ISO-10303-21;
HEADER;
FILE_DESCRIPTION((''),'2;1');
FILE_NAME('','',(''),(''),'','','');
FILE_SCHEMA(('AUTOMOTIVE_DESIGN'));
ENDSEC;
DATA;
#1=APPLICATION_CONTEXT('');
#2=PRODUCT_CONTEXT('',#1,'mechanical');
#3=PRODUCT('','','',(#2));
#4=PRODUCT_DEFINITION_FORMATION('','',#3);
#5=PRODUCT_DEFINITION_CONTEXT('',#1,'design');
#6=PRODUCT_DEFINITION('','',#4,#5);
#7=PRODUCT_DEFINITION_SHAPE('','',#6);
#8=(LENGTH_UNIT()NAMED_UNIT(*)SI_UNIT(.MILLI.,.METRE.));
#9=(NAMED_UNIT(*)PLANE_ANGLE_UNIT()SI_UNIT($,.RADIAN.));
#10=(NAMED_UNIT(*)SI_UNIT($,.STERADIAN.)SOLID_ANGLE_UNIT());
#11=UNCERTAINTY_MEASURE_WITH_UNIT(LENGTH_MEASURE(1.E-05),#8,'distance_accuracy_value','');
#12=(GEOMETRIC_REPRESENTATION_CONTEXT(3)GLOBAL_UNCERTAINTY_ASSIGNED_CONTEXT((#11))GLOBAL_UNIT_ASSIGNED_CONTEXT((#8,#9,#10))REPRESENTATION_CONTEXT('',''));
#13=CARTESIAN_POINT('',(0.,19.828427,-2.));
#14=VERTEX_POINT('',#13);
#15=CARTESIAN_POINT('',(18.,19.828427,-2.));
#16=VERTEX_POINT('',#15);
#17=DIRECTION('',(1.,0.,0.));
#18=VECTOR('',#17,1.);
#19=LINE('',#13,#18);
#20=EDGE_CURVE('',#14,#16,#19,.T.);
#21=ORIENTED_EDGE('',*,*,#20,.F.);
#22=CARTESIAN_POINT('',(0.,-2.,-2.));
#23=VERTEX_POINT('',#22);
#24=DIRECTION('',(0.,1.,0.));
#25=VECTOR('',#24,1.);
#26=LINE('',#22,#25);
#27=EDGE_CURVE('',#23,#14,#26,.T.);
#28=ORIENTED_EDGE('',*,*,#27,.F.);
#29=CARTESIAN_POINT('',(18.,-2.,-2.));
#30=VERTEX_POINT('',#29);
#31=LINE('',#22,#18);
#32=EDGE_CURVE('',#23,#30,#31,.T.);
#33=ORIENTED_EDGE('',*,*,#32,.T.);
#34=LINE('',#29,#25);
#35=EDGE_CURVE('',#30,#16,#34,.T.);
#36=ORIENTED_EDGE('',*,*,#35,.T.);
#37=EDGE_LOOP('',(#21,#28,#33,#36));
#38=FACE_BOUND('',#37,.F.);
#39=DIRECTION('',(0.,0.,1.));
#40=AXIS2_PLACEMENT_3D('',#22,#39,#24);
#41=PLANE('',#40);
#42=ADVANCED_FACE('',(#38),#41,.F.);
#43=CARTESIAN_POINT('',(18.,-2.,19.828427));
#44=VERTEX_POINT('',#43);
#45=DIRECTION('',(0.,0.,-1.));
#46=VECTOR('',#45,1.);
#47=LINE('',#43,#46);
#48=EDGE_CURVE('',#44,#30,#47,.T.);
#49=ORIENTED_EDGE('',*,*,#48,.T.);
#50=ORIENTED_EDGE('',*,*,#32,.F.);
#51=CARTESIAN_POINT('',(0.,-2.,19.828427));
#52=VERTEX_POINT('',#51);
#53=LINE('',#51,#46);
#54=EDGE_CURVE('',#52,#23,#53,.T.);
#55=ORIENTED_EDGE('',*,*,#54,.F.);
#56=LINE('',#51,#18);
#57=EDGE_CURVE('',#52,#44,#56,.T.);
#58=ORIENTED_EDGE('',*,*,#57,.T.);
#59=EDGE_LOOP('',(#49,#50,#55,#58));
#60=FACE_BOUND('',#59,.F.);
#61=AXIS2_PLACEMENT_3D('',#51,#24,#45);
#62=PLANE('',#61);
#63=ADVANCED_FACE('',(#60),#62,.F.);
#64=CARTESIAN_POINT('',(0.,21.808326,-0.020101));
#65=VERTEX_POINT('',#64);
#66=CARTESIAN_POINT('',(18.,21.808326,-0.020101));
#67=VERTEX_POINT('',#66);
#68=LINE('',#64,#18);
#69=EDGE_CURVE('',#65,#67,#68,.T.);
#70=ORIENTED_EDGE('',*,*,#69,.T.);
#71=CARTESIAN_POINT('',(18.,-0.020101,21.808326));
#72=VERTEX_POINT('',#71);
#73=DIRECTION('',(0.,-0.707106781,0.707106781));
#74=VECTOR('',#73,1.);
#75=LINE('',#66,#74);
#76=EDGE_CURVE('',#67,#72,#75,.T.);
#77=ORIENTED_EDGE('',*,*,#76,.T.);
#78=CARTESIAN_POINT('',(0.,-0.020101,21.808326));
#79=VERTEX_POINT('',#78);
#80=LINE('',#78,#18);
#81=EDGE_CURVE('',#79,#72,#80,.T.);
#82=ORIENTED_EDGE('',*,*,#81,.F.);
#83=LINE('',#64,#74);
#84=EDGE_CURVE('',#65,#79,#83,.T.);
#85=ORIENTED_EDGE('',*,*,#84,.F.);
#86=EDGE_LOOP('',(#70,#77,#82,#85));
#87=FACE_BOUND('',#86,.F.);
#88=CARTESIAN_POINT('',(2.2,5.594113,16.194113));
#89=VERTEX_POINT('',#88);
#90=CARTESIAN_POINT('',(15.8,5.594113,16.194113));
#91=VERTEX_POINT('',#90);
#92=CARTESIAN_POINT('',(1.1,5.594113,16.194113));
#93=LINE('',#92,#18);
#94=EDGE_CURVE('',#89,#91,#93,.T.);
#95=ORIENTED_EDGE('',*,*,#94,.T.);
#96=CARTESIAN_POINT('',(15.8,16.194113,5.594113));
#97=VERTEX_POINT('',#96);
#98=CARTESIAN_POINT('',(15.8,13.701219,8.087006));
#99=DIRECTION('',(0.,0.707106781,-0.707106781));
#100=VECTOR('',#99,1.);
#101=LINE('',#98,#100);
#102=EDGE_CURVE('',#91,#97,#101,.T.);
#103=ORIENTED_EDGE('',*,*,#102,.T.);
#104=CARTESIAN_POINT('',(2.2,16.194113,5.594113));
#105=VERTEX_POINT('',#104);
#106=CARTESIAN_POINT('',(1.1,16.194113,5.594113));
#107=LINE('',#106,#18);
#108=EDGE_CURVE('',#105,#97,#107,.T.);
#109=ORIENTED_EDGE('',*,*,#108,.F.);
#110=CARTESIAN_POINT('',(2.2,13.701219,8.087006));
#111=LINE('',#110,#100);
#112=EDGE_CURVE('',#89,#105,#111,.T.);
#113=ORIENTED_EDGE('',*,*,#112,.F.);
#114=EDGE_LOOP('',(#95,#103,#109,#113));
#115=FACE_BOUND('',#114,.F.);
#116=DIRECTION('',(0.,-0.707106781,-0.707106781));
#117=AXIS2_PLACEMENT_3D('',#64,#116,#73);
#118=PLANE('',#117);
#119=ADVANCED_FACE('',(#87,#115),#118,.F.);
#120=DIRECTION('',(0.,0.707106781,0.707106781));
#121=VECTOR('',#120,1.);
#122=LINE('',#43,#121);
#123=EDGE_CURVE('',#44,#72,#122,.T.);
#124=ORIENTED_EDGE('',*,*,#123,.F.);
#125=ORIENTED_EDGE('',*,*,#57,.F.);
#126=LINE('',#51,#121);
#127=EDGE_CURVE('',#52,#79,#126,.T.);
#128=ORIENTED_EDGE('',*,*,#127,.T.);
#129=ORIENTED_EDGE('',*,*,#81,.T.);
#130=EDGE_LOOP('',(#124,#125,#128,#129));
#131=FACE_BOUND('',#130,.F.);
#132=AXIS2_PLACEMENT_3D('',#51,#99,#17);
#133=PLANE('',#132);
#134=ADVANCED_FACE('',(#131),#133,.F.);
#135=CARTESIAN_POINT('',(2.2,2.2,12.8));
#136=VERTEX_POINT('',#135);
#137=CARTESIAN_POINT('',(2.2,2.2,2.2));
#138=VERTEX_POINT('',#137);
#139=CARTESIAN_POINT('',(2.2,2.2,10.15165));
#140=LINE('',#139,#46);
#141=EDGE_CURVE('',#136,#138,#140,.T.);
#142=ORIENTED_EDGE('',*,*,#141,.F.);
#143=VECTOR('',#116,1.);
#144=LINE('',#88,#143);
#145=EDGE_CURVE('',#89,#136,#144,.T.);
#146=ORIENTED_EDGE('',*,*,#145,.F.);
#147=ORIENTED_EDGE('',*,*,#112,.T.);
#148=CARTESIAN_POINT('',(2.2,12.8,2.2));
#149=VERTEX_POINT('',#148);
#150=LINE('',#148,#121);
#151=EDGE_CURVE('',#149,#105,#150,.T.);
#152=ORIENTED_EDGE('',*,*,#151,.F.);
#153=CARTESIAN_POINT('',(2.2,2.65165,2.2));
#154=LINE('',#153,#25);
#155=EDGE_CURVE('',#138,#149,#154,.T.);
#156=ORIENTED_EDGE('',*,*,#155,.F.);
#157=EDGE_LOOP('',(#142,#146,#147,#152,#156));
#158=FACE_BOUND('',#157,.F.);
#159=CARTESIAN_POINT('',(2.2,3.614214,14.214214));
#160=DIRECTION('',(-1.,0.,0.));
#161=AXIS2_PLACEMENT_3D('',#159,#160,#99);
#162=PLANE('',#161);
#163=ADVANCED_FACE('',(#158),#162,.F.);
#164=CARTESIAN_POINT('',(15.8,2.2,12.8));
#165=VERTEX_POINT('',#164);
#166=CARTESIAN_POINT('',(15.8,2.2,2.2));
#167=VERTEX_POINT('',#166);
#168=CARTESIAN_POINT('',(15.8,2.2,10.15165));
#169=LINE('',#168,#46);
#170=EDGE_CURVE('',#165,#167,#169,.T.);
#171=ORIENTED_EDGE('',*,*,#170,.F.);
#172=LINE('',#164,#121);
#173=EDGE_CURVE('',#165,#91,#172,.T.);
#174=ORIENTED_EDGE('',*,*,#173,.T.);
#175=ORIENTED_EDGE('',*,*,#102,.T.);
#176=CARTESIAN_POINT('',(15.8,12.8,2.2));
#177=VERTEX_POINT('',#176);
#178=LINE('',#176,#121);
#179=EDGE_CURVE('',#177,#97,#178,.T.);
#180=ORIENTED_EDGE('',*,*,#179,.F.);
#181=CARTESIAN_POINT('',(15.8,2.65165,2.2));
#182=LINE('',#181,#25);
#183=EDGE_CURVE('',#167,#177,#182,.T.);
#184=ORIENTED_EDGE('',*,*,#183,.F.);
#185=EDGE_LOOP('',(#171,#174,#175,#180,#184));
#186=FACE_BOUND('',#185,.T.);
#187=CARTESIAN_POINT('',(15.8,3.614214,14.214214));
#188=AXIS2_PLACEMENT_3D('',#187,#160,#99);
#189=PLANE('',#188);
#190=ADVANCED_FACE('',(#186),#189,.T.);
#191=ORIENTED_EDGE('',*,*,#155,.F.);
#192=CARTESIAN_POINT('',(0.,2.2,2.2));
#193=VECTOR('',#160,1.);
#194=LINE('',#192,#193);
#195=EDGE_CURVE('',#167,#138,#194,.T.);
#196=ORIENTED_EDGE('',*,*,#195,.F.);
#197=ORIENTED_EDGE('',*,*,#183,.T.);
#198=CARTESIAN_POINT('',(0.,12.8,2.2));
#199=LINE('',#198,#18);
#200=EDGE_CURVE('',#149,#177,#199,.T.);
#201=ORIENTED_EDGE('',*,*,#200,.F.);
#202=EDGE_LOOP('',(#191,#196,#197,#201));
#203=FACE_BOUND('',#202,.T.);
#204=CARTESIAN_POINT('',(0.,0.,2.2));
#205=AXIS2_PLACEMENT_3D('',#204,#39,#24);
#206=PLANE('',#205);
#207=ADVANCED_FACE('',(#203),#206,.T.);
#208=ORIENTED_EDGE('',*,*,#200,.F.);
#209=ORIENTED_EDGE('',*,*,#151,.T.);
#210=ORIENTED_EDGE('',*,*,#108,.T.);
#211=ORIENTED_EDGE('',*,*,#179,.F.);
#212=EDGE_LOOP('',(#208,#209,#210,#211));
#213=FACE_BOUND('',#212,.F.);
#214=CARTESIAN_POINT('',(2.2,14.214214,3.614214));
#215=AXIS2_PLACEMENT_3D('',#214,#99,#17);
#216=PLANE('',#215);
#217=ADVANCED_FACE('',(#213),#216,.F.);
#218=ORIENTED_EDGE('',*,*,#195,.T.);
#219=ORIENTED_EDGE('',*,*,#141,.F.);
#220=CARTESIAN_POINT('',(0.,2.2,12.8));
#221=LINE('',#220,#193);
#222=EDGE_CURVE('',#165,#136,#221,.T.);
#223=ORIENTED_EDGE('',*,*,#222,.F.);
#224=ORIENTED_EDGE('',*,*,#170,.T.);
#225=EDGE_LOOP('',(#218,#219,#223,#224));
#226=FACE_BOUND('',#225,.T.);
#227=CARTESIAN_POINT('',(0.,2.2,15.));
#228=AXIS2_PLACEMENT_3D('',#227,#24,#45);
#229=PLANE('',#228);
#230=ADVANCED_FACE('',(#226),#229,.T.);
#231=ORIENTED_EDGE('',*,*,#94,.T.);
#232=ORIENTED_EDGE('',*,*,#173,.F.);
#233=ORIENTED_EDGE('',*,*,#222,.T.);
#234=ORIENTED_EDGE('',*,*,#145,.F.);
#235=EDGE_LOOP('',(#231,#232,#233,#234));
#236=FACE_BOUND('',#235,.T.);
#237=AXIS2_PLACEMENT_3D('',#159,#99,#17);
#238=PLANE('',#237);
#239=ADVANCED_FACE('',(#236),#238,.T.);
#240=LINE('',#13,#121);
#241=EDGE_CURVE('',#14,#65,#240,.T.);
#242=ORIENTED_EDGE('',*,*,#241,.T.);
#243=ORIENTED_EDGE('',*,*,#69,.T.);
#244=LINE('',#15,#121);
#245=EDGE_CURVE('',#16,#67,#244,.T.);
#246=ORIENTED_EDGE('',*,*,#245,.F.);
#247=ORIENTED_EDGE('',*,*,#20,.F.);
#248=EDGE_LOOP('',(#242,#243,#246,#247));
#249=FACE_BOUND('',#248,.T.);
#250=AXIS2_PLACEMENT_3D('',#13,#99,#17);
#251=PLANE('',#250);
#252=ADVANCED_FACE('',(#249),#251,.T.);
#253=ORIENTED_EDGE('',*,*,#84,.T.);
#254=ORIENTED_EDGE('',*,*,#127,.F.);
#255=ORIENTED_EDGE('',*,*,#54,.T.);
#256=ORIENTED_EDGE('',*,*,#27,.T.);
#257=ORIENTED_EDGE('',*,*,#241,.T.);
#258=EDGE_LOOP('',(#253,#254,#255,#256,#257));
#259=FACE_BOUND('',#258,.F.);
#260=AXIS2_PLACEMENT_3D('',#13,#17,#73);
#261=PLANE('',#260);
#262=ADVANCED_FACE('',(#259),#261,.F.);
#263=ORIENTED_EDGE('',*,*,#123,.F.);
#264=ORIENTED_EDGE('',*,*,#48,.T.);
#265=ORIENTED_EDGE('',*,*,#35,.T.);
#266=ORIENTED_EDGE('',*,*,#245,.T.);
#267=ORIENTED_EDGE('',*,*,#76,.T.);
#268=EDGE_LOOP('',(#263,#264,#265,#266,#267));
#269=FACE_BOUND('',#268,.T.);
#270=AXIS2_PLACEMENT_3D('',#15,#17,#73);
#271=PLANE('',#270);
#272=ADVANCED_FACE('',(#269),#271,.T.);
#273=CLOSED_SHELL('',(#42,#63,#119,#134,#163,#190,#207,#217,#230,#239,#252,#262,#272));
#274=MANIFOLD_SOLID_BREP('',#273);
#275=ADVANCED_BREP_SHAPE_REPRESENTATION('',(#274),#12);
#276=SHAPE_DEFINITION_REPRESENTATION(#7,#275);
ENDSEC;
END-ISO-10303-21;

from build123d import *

# Parameters (mm, degrees)
F1_DEPTH = 18
F2_T     = -2.2
F4_DEPTH = 18
F3_W     = 13.6
F3_H     = 14.9906637612
F5_DEPTH = 8.9
F6_DEPTH = 2.8


# Not quite as in the source:
# - a feature of the source that left no trace in its solid (it failed there, or was rolled back) is left out


with BuildPart() as f1:
    # F0 (on Right) → F1 (new body)
    with BuildSketch(Plane.YZ):
        Polygon((0, 15), (0, 0), (15, 0), align=None)
    extrude(amount=F1_DEPTH)

    # F2
    f2_openings = [f1.faces().sort_by_distance(p)[0] for p in [
        (9, 7.5, 7.5),
    ]]
    offset(amount=F2_T, openings=f2_openings)

    # F0 (on Right) → F4 (join)
    with BuildSketch(Plane.YZ):
        Polygon((15, 0), (0, 0), (0, 15), (2.8284271247, 15), (-2, 19.8284271247), (-2, -2), (19.8284271247, -2), (15, 2.8284271247), align=None)
        Polygon((0, 15), (15, 0), (15, 2.8284271247), (2.8284271247, 15), align=None)
    extrude(amount=F4_DEPTH)

    # F3 (on face) → F5 (cut)
    with BuildSketch(Plane(origin=(0, 7.5, 7.5), x_dir=(1, 0, 0), z_dir=(0, 0.7071067812, 0.7071067812))):
        with Locations((9, 0)):
            Rectangle(F3_W, F3_H)
    extrude(amount=F5_DEPTH, mode=Mode.SUBTRACT)

    # F6 (add): a face of the model
    f6_faces = [f1.faces().sort_by_distance(p)[0] for p in [
        (9, 19.5757454612, -1.7473183365),
    ]]
    extrude(f6_faces, amount=F6_DEPTH)


solid = f1.part
